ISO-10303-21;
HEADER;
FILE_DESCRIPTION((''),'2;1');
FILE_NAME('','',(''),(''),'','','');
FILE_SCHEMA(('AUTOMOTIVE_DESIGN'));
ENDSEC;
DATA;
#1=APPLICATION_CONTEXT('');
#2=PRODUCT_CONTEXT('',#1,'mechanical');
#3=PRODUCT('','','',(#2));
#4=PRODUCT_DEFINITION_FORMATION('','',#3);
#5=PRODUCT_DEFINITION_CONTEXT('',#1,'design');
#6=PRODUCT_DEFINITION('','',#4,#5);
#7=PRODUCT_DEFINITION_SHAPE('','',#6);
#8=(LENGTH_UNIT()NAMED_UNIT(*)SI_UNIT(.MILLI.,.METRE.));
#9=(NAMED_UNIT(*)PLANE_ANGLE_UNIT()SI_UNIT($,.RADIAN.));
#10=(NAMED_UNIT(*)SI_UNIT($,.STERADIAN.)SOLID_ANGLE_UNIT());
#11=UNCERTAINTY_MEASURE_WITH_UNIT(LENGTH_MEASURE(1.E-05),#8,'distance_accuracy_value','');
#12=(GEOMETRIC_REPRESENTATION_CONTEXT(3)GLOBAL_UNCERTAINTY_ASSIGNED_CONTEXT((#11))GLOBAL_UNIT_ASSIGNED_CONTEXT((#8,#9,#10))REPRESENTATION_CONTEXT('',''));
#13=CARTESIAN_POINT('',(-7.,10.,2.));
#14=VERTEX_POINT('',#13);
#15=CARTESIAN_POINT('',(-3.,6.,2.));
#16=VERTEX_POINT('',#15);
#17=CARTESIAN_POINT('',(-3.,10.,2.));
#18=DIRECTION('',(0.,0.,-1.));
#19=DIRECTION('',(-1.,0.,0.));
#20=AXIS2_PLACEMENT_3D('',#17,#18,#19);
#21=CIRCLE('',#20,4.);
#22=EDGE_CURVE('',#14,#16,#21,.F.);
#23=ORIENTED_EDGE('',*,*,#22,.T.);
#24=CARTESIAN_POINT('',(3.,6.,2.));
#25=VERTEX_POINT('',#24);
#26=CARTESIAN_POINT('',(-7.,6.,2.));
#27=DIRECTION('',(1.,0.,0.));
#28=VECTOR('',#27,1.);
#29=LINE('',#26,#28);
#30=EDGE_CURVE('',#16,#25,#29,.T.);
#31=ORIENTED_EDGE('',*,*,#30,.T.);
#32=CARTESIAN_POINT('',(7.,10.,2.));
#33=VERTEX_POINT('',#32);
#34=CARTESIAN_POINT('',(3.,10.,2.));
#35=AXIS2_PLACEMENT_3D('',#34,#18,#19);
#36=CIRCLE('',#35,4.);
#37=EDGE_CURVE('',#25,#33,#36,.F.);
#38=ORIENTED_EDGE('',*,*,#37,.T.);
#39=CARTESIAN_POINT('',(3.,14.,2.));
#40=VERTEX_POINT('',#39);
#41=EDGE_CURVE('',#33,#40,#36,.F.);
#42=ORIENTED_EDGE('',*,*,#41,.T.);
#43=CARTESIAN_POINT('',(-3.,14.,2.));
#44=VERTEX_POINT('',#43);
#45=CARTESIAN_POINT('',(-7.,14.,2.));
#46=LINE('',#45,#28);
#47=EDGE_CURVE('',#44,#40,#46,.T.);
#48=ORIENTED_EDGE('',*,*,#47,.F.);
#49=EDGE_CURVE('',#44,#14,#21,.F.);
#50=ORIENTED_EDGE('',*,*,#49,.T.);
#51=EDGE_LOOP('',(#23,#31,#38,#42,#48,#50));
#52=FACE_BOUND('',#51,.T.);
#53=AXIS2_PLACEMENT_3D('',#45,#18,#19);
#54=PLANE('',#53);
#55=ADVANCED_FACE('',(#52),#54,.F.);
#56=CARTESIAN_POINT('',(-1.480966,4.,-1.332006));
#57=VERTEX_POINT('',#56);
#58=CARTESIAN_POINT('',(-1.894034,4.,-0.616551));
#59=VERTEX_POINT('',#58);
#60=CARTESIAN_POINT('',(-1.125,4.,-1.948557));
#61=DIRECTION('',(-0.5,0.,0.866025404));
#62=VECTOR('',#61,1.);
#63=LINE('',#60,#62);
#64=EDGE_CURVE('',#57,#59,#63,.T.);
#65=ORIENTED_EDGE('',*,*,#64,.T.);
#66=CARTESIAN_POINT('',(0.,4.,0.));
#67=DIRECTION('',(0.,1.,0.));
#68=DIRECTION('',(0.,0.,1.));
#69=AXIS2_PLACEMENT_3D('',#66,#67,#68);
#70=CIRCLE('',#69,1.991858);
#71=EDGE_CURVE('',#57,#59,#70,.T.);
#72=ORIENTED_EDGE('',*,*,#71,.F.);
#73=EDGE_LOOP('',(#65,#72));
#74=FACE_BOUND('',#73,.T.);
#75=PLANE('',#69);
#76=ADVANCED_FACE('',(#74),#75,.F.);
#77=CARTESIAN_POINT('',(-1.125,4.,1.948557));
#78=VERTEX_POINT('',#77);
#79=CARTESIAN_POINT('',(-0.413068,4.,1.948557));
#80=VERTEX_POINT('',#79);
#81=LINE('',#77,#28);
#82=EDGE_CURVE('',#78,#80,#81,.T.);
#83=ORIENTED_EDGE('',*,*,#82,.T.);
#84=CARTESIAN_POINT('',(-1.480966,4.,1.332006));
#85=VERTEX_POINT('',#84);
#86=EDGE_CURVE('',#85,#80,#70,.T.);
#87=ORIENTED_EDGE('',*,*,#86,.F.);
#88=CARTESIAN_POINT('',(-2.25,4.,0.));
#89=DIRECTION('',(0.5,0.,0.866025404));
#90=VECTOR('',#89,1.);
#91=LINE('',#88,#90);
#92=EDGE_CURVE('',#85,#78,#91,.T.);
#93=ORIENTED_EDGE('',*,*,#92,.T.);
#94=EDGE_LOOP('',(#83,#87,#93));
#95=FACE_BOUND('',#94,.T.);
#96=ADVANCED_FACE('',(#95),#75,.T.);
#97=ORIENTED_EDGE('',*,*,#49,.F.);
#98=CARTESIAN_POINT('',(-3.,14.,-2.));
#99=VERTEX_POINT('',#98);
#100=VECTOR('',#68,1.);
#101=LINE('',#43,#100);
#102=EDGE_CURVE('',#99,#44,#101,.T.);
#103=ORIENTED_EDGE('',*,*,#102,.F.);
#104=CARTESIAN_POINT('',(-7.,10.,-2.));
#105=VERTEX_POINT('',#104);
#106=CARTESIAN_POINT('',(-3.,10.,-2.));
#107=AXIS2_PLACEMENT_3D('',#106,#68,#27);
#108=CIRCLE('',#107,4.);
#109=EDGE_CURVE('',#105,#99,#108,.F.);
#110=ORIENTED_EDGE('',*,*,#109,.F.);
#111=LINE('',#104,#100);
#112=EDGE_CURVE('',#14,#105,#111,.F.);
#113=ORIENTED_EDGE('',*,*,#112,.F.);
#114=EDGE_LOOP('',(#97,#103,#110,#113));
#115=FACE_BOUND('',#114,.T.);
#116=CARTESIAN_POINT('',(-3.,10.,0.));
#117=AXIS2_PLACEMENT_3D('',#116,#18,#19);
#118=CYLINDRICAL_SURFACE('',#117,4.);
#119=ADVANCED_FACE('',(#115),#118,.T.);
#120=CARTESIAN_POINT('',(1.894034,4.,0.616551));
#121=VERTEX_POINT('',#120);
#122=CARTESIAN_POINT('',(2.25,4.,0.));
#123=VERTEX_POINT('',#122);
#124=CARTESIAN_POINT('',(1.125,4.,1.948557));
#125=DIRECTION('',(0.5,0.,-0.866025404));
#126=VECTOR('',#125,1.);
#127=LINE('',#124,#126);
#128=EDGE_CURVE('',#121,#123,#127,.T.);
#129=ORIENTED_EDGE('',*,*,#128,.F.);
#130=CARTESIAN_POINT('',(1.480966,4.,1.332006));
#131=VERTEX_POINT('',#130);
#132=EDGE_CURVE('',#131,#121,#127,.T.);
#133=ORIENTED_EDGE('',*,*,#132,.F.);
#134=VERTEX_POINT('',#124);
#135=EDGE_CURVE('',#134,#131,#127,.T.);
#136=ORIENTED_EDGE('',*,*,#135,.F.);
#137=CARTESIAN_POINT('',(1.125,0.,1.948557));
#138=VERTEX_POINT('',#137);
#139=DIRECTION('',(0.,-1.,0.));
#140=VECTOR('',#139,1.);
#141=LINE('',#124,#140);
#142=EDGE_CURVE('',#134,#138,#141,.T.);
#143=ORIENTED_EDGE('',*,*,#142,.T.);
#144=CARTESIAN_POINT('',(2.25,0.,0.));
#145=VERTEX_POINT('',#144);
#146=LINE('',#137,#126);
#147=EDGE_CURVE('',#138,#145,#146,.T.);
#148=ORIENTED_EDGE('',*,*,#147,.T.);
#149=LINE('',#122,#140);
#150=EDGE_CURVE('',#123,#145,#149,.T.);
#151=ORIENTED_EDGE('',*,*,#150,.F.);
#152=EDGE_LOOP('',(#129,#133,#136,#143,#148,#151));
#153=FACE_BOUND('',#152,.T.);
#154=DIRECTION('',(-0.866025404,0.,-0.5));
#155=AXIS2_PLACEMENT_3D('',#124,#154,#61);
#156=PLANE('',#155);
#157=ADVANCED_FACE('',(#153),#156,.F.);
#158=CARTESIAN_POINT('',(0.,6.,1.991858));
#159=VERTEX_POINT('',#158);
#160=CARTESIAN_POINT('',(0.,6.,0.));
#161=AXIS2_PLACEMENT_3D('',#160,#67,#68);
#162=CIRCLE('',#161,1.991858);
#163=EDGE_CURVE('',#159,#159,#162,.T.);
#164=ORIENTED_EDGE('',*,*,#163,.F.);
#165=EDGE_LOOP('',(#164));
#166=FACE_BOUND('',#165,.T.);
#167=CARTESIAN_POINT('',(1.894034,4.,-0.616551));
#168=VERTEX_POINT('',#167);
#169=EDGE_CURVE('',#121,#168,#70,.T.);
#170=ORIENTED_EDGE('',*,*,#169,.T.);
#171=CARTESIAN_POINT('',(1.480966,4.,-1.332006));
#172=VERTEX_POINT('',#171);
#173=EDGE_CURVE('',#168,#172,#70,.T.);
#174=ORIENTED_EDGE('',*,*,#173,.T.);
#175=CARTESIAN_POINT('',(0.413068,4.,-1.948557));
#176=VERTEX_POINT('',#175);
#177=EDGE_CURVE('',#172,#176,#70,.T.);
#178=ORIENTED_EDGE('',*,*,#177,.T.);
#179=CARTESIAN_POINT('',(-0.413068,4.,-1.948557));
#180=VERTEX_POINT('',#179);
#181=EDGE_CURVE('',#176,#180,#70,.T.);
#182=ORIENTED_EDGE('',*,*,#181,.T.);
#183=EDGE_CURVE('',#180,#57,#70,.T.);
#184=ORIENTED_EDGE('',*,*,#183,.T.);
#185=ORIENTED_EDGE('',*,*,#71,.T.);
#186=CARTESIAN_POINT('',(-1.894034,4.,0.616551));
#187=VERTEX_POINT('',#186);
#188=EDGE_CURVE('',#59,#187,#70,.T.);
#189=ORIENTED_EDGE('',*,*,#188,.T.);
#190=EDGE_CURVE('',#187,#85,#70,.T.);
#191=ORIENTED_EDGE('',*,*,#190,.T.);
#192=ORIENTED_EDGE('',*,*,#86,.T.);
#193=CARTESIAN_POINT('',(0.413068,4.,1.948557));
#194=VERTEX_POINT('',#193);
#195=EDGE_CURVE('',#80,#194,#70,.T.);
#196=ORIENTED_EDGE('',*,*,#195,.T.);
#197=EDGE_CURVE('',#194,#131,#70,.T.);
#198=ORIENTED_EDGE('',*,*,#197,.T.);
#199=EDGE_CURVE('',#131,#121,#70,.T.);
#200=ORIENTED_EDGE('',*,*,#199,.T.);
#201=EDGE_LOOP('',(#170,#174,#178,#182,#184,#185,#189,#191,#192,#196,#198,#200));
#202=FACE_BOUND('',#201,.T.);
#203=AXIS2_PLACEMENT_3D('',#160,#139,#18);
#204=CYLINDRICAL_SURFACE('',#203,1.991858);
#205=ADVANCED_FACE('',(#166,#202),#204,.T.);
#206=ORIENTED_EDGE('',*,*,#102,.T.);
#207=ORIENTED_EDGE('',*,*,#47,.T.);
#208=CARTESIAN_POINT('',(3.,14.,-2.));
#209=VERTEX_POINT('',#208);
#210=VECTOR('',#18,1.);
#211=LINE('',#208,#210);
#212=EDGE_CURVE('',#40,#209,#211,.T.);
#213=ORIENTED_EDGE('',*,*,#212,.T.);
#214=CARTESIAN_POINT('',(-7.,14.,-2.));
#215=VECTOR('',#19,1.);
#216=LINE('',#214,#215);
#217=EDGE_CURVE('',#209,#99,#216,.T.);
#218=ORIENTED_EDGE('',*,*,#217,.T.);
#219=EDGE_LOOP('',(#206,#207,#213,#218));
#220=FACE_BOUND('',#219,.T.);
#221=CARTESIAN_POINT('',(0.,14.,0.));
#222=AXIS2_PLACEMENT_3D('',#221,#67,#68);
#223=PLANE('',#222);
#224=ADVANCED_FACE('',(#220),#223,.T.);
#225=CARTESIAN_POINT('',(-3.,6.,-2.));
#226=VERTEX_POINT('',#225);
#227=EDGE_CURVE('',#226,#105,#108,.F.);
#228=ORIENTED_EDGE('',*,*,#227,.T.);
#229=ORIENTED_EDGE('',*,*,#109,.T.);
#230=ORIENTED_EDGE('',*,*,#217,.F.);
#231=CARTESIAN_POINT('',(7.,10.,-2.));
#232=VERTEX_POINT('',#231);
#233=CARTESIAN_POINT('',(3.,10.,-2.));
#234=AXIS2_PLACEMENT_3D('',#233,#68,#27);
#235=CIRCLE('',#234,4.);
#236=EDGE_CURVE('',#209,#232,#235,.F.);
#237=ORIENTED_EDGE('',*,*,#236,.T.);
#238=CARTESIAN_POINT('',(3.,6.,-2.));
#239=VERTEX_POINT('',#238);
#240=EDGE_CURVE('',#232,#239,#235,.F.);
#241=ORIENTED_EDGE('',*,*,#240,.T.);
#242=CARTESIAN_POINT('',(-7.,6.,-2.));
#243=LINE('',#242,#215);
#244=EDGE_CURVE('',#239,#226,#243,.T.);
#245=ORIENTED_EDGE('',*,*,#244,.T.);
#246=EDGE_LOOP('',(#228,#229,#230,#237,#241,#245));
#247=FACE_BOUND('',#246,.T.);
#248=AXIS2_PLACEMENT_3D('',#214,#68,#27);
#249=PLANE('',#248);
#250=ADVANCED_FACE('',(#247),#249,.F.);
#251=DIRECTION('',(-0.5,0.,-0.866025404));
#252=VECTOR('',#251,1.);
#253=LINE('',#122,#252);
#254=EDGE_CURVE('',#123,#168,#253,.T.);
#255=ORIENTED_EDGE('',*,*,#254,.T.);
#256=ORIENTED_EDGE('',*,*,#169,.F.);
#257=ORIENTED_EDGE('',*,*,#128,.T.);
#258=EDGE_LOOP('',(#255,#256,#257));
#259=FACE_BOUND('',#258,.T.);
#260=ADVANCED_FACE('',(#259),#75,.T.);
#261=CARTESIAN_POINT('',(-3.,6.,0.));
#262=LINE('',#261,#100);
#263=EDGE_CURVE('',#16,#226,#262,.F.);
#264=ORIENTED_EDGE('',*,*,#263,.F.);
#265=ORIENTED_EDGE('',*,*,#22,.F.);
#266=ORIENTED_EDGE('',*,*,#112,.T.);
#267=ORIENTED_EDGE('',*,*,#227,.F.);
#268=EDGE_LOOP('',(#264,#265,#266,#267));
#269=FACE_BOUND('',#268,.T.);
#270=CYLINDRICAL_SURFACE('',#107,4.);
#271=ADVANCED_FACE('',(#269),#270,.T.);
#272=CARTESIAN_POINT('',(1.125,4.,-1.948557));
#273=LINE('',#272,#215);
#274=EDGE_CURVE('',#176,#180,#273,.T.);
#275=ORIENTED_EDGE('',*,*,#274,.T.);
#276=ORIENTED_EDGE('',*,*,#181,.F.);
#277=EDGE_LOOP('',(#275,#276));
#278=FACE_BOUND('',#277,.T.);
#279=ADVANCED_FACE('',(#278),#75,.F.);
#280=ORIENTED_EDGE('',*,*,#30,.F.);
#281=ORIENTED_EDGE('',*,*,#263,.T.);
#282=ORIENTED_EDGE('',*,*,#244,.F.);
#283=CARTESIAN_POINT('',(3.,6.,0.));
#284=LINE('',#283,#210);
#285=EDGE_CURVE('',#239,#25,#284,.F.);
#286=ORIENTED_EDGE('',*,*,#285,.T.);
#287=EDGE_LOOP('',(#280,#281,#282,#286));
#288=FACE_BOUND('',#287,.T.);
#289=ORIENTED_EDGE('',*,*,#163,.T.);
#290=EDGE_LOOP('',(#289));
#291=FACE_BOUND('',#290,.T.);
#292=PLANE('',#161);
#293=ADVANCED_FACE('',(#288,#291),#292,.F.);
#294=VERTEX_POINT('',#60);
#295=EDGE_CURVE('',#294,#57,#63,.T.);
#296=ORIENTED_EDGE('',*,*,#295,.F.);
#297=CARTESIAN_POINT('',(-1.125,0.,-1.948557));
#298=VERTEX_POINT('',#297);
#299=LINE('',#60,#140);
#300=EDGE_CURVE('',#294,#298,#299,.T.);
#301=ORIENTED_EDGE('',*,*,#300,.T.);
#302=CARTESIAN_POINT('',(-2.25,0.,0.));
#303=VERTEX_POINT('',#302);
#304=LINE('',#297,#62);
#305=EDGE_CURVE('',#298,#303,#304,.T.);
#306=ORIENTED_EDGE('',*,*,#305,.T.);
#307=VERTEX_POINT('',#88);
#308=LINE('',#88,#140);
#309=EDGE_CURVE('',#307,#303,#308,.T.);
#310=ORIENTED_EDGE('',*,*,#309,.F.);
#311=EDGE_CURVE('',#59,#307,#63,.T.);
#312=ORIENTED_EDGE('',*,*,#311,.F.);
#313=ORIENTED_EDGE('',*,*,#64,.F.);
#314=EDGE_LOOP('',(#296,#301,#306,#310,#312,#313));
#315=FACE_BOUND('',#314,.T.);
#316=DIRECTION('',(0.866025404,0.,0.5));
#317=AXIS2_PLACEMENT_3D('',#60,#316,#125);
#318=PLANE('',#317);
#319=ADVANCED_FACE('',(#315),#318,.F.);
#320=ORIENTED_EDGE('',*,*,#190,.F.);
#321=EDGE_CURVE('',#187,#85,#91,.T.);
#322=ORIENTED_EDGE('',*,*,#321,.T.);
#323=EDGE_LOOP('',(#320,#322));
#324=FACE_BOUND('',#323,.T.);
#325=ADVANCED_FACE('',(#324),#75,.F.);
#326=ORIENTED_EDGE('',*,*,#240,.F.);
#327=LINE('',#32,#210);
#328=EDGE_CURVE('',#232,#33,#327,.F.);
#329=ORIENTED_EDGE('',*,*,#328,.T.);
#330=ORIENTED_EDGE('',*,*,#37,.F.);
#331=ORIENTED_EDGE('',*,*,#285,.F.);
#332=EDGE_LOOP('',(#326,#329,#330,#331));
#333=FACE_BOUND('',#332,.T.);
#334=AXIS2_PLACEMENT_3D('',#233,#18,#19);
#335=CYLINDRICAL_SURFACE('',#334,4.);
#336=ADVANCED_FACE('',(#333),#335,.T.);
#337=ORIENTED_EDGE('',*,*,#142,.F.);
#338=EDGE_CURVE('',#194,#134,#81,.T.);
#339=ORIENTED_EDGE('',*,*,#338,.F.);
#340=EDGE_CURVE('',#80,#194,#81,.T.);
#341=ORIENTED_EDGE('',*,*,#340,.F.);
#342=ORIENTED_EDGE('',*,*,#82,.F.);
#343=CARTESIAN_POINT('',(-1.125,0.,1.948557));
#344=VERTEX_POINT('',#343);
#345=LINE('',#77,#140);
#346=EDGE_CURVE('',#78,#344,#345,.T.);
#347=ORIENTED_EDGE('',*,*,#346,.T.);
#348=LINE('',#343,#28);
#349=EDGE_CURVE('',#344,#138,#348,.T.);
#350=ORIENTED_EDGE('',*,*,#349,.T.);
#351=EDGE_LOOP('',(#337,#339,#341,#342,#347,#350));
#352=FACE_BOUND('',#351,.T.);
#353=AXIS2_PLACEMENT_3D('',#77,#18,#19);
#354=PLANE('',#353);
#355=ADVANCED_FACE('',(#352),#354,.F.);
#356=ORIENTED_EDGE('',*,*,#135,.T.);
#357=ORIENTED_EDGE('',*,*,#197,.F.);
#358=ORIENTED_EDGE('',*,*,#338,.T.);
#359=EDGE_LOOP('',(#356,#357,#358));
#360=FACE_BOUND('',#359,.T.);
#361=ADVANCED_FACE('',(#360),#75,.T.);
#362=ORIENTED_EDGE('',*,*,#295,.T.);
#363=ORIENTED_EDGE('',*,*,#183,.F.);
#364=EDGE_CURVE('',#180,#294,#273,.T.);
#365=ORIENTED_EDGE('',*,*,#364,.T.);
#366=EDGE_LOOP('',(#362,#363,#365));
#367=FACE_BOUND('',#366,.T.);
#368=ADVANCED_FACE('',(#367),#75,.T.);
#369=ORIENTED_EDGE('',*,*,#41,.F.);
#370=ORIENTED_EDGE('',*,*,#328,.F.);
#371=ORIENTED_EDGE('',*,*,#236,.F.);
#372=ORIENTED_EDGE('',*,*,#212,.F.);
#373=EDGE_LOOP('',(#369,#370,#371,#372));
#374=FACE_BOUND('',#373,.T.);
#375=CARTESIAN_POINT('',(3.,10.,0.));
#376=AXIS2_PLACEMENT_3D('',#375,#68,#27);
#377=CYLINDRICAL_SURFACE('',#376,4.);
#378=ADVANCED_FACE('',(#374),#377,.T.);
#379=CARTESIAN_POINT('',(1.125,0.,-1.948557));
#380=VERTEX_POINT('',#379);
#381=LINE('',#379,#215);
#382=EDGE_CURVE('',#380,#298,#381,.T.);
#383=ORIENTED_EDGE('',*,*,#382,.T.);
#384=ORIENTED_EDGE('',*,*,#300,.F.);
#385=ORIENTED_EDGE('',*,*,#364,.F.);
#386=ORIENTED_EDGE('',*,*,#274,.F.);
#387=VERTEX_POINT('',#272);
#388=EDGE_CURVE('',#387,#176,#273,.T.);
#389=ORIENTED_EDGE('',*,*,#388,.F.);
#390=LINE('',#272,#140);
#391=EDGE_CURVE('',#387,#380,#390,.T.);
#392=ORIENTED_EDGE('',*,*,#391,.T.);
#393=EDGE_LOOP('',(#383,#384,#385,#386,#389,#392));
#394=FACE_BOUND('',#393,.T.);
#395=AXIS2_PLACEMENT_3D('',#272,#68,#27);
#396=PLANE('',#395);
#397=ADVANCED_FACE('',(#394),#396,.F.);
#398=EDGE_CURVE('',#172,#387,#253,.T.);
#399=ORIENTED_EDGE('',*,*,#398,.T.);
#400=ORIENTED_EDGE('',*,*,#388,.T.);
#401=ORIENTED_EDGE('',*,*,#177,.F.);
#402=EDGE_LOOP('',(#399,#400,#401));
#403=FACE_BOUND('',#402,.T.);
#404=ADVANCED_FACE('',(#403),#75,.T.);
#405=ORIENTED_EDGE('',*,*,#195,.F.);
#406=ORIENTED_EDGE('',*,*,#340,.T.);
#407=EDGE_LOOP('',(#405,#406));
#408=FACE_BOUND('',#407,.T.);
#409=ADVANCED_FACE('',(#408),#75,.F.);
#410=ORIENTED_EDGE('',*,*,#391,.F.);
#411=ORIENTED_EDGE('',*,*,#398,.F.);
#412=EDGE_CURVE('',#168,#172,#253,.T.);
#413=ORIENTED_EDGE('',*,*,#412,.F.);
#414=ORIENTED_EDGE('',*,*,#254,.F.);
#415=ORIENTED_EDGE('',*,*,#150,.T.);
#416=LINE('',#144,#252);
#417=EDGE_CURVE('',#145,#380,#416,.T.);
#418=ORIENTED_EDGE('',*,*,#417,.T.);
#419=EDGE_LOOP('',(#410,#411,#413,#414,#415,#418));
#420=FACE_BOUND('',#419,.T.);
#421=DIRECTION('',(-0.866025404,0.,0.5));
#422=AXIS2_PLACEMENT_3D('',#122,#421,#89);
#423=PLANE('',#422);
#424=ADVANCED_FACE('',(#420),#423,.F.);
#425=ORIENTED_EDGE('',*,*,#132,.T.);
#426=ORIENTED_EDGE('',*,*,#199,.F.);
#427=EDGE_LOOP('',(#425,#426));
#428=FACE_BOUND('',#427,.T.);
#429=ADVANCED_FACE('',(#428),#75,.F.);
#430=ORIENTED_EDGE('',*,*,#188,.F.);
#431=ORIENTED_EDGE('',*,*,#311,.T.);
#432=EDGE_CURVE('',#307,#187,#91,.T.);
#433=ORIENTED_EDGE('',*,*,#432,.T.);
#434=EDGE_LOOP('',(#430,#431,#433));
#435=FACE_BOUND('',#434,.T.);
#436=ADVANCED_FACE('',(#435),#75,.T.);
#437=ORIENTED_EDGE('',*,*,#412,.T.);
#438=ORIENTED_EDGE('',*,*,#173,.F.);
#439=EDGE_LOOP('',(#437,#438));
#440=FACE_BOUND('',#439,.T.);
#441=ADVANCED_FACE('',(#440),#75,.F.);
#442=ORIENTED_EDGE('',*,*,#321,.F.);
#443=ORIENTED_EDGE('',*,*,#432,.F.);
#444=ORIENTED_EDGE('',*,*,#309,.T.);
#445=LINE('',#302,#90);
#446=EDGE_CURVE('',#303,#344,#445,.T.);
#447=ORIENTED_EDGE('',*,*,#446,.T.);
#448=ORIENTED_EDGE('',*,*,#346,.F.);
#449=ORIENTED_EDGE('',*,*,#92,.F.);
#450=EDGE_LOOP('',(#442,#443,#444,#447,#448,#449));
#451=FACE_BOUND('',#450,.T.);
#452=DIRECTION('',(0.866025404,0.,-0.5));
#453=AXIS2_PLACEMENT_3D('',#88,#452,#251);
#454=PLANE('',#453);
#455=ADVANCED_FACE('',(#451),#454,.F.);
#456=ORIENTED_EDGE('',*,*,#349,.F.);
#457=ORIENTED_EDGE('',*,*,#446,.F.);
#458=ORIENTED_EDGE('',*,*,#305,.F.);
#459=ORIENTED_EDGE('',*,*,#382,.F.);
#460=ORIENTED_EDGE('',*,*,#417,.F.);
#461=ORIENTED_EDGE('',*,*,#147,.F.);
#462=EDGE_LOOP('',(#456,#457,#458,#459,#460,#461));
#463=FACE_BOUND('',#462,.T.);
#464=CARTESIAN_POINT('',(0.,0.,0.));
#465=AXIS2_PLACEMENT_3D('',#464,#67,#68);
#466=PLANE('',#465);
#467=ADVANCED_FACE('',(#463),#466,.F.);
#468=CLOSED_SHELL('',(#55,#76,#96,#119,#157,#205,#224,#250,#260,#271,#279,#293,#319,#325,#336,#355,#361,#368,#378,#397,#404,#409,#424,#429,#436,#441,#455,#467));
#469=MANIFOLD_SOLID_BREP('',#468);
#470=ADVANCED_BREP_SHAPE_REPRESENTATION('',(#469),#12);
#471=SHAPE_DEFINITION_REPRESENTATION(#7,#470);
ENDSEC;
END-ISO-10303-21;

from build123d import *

# Parameters (mm, degrees)
BOSS_EXTRUDE1_DEPTH = 4
SKETCH3_R           = 1.991858429
BOSS_EXTRUDE3_DEPTH = 2
SKETCH2_W           = 14
SKETCH2_H           = 4
BOSS_EXTRUDE2_DEPTH = 8
FILLET1_R           = 4


with BuildPart() as part:
    # Sketch1 → Boss-Extrude1 (new body)
    with BuildSketch(Plane(origin=(0, 0, 0), x_dir=(1, 0, 0), z_dir=(0, 1, 0))):
        Polygon((1.125, 1.948557159), (-1.125, 1.948557159), (-2.25, 0), (-1.125, -1.948557159), (1.125, -1.948557159), (2.25, 0), align=None)
    extrude(amount=BOSS_EXTRUDE1_DEPTH)

    # Sketch3 → Boss-Extrude3 (add)
    with BuildSketch(Plane(origin=(0, 4, 0), x_dir=(1, 0, 0), z_dir=(0, 1, 0))):
        with Locations(Location((0, 0, 0), (0, 0, 78.031254445))):
            Circle(SKETCH3_R)
    extrude(amount=BOSS_EXTRUDE3_DEPTH)

    # Sketch2 → Boss-Extrude2 (add)
    with BuildSketch(Plane(origin=(0, 6, 0), x_dir=(1, 0, 0), z_dir=(0, 1, 0))):
        Rectangle(SKETCH2_W, SKETCH2_H)
    extrude(amount=BOSS_EXTRUDE2_DEPTH)

    # Fillet1
    fillet1_edges = [part.edges().sort_by_distance(p)[0] for p in [
        (7, 6, 0),
        (7, 14, 0),
        (-7, 6, 0),
        (-7, 14, 0),
    ]]
    fillet(fillet1_edges, radius=FILLET1_R - 0.0001)  # a hair under: the kernel refuses the full size


solid = part.part
